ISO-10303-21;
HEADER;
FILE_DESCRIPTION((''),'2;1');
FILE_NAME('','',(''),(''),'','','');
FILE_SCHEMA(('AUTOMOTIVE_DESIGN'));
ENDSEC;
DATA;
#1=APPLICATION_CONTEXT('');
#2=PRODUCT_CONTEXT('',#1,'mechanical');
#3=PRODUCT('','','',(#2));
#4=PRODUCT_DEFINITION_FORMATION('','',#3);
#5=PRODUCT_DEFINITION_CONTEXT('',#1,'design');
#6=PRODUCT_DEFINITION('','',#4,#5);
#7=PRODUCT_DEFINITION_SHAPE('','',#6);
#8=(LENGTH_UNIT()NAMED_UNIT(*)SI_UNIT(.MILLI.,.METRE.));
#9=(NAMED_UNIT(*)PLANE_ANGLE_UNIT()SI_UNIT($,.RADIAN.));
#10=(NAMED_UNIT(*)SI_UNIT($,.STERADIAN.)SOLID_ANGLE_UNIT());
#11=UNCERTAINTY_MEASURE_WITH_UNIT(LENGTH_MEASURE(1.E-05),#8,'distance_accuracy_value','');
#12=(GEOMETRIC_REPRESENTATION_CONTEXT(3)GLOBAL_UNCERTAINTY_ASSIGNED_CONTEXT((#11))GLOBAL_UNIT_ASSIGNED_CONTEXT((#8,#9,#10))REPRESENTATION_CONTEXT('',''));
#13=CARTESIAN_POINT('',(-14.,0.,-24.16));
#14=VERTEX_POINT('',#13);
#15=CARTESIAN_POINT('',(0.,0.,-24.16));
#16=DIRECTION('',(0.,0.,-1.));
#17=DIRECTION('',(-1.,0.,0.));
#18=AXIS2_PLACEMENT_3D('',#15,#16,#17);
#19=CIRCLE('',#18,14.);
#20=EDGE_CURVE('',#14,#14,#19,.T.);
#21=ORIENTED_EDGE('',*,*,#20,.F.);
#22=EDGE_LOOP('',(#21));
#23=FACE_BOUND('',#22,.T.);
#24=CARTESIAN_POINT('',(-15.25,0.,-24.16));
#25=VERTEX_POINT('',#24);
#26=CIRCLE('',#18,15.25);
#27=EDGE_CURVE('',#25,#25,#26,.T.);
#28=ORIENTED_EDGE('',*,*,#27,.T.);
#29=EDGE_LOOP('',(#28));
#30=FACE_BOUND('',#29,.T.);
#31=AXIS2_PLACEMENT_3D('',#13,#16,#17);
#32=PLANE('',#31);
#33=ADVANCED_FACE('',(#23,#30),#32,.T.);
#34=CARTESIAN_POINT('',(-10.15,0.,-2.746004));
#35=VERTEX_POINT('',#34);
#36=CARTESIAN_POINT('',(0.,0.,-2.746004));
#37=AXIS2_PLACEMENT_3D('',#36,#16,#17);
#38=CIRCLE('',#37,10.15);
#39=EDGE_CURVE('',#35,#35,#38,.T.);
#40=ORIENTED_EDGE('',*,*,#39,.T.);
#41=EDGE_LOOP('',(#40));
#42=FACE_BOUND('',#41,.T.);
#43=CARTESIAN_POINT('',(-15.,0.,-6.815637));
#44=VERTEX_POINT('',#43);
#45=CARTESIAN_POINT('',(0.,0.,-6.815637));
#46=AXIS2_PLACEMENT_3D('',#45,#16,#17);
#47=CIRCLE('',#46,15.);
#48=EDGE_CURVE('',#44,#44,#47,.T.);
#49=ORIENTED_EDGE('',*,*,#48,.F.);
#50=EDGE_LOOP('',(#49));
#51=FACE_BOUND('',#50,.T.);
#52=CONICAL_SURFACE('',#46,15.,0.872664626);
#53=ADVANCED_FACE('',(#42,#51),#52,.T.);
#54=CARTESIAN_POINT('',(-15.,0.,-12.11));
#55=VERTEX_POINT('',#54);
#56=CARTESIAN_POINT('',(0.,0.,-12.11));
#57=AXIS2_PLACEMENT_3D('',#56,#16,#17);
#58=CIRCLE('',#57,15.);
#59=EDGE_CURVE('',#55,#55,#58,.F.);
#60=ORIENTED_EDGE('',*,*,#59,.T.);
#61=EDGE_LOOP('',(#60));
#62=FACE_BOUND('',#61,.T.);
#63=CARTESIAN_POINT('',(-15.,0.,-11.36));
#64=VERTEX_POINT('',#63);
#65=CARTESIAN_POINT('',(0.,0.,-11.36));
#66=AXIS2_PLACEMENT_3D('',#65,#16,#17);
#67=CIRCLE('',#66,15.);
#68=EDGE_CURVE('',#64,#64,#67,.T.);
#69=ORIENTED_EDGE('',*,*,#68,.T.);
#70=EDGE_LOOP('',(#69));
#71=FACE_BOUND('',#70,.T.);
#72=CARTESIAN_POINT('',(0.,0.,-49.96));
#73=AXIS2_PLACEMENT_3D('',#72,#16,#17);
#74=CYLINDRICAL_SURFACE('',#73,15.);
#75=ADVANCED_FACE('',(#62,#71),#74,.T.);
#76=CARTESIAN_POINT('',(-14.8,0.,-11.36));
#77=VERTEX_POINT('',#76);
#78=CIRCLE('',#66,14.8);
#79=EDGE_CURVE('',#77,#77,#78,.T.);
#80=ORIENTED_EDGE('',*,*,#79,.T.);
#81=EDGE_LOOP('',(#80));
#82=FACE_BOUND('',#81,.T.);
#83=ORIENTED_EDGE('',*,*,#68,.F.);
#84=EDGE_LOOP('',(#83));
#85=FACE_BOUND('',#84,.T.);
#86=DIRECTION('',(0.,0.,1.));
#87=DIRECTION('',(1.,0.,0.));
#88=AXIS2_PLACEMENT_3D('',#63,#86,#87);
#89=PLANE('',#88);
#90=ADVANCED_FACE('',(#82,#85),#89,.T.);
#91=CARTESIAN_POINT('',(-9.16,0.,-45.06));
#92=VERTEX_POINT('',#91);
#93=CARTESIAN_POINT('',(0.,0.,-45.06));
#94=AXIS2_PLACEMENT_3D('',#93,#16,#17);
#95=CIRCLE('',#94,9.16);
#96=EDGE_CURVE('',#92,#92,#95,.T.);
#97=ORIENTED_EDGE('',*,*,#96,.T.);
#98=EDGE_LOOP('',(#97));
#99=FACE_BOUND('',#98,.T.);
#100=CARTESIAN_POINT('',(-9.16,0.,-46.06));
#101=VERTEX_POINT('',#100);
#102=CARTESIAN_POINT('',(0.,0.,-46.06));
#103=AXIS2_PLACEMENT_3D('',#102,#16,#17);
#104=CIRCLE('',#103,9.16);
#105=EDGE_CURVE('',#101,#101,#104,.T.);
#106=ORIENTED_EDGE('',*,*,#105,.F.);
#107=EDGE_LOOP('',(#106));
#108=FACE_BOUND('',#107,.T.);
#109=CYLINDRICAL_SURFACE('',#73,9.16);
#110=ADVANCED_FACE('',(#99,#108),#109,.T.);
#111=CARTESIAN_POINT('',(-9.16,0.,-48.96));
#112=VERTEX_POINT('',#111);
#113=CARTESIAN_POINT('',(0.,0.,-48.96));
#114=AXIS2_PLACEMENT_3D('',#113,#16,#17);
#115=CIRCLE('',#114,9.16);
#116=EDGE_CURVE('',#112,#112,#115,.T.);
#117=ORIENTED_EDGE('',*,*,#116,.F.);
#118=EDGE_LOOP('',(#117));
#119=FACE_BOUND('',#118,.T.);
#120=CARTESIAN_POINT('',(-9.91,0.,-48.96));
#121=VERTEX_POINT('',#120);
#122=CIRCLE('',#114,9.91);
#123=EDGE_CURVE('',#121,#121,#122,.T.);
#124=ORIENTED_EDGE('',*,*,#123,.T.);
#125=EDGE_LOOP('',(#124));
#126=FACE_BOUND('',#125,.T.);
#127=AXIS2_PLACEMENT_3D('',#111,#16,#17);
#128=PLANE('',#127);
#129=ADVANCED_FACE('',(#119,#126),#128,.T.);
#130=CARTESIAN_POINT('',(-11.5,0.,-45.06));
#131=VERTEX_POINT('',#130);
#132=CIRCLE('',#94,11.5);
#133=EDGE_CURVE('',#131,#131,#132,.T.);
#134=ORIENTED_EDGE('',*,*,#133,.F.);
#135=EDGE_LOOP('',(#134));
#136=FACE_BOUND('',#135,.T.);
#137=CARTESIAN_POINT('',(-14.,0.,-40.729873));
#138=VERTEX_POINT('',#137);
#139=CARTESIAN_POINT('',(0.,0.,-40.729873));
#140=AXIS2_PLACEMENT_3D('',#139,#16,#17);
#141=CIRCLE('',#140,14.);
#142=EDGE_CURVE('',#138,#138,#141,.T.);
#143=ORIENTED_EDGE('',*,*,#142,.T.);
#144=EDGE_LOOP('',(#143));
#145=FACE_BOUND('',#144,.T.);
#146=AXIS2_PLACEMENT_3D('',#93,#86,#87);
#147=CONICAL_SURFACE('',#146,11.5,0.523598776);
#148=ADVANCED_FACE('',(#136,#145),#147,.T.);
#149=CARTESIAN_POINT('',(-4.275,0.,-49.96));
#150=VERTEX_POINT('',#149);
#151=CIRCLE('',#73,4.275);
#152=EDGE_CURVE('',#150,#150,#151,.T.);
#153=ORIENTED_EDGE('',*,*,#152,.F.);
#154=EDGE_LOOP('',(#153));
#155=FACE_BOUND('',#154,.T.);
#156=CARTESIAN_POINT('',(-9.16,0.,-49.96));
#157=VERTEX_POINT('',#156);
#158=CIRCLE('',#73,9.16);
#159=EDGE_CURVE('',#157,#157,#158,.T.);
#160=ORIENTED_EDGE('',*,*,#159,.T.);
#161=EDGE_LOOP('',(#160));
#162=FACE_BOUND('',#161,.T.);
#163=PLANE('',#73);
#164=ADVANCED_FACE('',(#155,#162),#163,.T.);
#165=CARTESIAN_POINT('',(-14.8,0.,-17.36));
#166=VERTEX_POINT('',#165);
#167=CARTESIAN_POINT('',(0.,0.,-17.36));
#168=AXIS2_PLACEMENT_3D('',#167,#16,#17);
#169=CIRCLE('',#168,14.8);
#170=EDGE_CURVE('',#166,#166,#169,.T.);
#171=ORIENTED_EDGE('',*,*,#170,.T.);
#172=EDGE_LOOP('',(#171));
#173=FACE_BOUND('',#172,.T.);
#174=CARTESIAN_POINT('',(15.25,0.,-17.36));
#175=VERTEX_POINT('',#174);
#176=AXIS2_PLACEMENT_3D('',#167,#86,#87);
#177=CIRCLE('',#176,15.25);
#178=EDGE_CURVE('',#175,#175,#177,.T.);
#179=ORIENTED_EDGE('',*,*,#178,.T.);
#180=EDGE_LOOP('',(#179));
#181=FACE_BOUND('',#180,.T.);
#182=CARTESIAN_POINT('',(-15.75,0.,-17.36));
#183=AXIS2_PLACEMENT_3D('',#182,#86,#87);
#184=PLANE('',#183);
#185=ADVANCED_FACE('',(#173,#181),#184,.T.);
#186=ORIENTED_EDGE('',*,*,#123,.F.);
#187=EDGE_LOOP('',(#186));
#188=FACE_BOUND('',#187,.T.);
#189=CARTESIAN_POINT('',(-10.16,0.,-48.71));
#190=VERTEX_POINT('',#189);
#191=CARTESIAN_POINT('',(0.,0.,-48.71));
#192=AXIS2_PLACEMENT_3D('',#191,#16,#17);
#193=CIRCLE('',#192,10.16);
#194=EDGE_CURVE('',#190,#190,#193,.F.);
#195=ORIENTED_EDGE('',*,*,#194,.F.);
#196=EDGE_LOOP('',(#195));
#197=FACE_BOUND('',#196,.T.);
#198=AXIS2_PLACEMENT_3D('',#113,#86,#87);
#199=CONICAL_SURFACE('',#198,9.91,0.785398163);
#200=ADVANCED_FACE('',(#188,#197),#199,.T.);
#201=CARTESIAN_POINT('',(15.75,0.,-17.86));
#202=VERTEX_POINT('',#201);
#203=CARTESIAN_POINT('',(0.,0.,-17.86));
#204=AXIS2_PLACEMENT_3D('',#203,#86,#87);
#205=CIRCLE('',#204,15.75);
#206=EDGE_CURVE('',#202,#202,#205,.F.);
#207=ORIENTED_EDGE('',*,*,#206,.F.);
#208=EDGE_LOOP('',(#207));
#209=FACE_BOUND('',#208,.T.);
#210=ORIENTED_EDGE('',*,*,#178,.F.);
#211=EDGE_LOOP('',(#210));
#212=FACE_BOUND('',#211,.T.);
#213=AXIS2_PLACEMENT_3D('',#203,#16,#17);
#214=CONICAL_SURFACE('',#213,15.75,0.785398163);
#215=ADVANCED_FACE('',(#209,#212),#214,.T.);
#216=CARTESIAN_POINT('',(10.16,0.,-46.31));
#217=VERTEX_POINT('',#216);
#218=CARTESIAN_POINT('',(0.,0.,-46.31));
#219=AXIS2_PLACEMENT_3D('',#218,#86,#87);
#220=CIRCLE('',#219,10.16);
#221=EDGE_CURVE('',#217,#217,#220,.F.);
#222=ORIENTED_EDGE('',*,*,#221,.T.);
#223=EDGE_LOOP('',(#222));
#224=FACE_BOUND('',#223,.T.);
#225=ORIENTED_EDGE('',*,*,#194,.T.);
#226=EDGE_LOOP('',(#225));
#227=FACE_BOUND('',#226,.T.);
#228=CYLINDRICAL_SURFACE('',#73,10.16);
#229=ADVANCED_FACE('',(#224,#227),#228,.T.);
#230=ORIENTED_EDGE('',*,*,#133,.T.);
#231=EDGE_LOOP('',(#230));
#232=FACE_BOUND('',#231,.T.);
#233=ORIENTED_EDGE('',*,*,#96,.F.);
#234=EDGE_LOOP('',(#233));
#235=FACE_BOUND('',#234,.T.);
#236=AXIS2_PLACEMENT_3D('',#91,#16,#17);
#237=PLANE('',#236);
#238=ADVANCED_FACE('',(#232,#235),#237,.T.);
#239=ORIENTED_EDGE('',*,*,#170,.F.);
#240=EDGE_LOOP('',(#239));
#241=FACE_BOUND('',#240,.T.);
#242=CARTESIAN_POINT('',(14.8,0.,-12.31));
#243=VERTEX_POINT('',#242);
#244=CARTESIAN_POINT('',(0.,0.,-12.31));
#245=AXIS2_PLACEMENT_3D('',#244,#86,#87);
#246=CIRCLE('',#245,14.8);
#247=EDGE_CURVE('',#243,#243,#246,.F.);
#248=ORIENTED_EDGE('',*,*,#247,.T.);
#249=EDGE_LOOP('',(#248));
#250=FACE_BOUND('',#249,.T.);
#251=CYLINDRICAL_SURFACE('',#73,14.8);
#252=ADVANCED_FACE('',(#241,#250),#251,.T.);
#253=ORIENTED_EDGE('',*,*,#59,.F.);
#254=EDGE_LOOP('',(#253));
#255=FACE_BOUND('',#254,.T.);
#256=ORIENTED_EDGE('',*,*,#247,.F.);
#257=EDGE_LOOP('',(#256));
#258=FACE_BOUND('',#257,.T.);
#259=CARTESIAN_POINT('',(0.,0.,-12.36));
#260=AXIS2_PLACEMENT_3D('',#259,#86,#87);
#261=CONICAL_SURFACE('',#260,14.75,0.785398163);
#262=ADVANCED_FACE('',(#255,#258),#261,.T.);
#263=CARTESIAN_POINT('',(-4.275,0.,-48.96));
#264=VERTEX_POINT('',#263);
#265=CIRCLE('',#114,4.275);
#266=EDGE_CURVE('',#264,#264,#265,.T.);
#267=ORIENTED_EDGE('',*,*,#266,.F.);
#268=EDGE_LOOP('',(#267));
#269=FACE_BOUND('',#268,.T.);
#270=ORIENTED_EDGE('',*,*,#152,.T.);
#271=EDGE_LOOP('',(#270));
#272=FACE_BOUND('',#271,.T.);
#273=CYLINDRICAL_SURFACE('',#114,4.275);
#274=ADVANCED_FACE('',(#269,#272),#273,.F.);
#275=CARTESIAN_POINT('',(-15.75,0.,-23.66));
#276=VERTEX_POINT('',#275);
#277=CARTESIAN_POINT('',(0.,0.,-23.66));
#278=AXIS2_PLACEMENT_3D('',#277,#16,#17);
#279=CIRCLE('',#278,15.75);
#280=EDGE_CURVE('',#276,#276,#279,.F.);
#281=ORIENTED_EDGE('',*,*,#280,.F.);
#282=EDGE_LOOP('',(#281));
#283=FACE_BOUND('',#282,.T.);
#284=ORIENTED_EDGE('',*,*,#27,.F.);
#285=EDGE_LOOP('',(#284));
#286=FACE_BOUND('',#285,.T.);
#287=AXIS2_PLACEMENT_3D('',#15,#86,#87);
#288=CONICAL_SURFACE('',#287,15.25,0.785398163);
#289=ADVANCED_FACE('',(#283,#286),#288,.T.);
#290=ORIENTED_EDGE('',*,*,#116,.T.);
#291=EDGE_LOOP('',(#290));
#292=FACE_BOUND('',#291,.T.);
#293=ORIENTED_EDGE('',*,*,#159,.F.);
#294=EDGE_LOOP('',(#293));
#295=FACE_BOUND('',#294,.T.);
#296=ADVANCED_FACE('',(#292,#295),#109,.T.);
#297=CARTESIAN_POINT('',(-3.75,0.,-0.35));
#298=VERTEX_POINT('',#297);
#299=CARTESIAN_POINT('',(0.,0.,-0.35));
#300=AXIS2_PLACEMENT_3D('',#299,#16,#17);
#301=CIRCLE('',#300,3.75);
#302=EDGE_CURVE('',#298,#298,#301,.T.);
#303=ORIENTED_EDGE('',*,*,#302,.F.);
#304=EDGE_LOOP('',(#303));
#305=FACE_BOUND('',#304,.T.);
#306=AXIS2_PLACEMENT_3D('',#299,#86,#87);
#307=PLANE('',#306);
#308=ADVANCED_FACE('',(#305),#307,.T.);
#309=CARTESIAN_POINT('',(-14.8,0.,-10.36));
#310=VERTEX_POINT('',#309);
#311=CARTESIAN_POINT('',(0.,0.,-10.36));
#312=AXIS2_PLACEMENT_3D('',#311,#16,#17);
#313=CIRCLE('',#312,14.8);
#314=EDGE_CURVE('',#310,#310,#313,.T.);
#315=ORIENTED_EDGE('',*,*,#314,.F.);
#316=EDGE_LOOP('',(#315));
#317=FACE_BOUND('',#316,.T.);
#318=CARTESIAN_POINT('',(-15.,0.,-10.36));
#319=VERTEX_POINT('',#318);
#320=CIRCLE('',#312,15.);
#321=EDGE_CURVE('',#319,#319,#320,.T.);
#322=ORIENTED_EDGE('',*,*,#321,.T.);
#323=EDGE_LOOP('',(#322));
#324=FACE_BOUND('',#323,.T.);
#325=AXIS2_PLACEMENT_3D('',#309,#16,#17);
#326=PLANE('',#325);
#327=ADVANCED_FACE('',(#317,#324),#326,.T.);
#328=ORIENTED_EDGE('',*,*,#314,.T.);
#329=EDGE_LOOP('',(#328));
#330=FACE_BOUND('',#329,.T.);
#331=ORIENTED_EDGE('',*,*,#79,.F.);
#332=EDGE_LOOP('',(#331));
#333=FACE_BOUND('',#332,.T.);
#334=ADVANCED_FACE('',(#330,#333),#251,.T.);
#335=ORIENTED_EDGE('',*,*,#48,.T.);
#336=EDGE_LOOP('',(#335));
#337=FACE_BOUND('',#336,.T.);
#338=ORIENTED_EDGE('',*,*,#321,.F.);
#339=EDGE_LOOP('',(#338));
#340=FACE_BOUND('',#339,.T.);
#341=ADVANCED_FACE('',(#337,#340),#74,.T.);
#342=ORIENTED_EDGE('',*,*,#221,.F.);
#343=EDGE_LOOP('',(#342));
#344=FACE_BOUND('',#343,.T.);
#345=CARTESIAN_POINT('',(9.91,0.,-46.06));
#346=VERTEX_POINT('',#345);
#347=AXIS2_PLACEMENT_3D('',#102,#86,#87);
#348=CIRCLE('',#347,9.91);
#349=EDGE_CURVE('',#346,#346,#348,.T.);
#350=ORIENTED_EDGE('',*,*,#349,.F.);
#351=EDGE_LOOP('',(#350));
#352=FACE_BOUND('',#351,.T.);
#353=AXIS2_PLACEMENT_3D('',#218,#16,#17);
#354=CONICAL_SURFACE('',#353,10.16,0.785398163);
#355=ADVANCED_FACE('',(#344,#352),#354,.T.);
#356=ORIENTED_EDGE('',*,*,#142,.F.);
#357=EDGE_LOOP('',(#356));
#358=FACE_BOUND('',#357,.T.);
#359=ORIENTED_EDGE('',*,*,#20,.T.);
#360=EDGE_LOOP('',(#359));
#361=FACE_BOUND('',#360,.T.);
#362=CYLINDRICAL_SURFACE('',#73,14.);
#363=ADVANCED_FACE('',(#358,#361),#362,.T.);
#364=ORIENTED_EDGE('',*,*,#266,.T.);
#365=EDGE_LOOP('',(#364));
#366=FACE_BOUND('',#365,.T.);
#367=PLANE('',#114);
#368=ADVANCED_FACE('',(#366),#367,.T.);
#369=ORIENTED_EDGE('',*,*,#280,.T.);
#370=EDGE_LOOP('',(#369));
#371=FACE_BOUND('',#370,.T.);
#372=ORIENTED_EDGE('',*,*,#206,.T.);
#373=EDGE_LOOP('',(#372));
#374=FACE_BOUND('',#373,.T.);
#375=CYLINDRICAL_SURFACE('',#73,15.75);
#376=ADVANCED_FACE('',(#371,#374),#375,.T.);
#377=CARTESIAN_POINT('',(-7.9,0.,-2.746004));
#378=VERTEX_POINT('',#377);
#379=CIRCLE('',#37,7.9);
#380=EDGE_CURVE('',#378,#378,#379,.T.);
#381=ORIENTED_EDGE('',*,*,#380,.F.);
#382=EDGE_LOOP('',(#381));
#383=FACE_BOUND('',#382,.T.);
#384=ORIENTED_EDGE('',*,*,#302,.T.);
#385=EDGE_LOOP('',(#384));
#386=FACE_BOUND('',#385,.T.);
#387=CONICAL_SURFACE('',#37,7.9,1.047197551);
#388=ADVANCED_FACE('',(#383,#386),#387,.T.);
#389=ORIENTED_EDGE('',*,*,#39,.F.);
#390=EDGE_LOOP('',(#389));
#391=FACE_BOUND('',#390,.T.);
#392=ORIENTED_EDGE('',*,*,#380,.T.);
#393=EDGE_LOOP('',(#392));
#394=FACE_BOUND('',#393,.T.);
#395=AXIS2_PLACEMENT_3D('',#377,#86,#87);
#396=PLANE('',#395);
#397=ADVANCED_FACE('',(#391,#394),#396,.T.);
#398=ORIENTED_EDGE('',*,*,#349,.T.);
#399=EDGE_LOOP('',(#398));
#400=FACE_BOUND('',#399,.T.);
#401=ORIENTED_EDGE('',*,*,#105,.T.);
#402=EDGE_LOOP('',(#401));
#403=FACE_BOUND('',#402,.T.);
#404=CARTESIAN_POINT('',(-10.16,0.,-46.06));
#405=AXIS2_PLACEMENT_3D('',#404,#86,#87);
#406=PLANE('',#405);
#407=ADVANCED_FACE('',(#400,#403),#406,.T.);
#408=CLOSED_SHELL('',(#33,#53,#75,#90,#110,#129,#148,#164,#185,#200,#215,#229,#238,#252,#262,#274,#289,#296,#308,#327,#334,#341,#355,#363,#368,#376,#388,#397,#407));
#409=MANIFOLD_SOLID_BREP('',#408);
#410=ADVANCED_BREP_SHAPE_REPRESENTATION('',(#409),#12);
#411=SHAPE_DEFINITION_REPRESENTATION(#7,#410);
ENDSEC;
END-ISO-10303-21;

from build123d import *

# Parameters (mm, degrees)
CHAMFER1_SIZE      = 0.25
CHAMFER2_SIZE      = 0.5
SKETCH2_R          = 4.275
CUT_EXTRUDE1_DEPTH = 1


with BuildPart() as part:
    # Sketch1 → Revolve1 (revolve)
    with BuildSketch(Plane(origin=(0, 0, 0), x_dir=(1, 0, 0), z_dir=(0, 1, 0))):
        Polygon((0, 0.35), (-3.75, 0.35), (-7.9, 2.746003617), (-10.15, 2.746003617), (-15, 6.815636828), (-15, 10.36), (-14.8, 10.36), (-14.8, 11.36), (-15, 11.36), (-15, 12.36), (-14.8, 12.36), (-14.8, 17.36), (-15.75, 17.36), (-15.75, 24.16), (-14, 24.16), (-14, 40.729872981), (-11.5, 45.06), (-9.16, 45.06), (-9.16, 46.06), (-10.16, 46.06), (-10.16, 48.96), (-9.16, 48.96), (-9.16, 49.96), (0, 49.96), align=None)
    revolve(axis=Axis((0, 0, -49.96), (0, 0, 1)))

    # Chamfer1
    # the kernel refuses this chamfer: 0.25 mm, written as the material it takes off along each edge
    with BuildSketch(Plane(origin=(0, 0, -12.36), x_dir=(-1, 0, 0), z_dir=(0, 1, 0))) as chamfer1_piece_1_section:
        Polygon((15, CHAMFER1_SIZE), (15 - CHAMFER1_SIZE, 0), (15, 0), align=None)
    chamfer1_piece_1 = revolve(axis=Axis((0, 0, -12.36), (0, 0, 1)), mode=Mode.PRIVATE)
    chamfer1_piece_1 = chamfer1_piece_1 - Plane(origin=(0, 0, -12.216726666), x_dir=(-1, 0, 0), z_dir=(0, 0, -1)) * Cylinder(14.8, 60, mode=Mode.PRIVATE)
    add(chamfer1_piece_1, mode=Mode.SUBTRACT)
    with BuildSketch(Plane(origin=(0, 0, -48.96), x_dir=(-1, 0, 0), z_dir=(0, 1, 0))) as chamfer1_piece_2:
        Polygon((10.16, CHAMFER1_SIZE), (10.16 - CHAMFER1_SIZE, 0), (10.16, 0), align=None)
    revolve(axis=Axis((0, 0, -48.96), (0, 0, 1)), mode=Mode.SUBTRACT)
    with BuildSketch(Plane(origin=(0, 0, -46.06), x_dir=(-1, 0, 0), z_dir=(0, 1, 0))) as chamfer1_piece_3:
        Polygon((10.16 - CHAMFER1_SIZE, 0), (10.16, -CHAMFER1_SIZE), (10.16, 0), align=None)
    revolve(axis=Axis((0, 0, -46.06), (0, 0, 1)), mode=Mode.SUBTRACT)

    # Chamfer2
    chamfer2_edges = [part.edges().sort_by_distance(p)[0] for p in [
        (15.75, 0, -24.16),
        (15.75, 0, -17.36),
    ]]
    chamfer(chamfer2_edges, length=CHAMFER2_SIZE)

    # Sketch2 → Cut-Extrude1 (cut)
    with BuildSketch(Plane(origin=(0, 0, -49.96), x_dir=(-1, 0, 0), z_dir=(0, 0, -1))):
        Circle(SKETCH2_R)
    extrude(amount=-CUT_EXTRUDE1_DEPTH, mode=Mode.SUBTRACT)


solid = part.part
